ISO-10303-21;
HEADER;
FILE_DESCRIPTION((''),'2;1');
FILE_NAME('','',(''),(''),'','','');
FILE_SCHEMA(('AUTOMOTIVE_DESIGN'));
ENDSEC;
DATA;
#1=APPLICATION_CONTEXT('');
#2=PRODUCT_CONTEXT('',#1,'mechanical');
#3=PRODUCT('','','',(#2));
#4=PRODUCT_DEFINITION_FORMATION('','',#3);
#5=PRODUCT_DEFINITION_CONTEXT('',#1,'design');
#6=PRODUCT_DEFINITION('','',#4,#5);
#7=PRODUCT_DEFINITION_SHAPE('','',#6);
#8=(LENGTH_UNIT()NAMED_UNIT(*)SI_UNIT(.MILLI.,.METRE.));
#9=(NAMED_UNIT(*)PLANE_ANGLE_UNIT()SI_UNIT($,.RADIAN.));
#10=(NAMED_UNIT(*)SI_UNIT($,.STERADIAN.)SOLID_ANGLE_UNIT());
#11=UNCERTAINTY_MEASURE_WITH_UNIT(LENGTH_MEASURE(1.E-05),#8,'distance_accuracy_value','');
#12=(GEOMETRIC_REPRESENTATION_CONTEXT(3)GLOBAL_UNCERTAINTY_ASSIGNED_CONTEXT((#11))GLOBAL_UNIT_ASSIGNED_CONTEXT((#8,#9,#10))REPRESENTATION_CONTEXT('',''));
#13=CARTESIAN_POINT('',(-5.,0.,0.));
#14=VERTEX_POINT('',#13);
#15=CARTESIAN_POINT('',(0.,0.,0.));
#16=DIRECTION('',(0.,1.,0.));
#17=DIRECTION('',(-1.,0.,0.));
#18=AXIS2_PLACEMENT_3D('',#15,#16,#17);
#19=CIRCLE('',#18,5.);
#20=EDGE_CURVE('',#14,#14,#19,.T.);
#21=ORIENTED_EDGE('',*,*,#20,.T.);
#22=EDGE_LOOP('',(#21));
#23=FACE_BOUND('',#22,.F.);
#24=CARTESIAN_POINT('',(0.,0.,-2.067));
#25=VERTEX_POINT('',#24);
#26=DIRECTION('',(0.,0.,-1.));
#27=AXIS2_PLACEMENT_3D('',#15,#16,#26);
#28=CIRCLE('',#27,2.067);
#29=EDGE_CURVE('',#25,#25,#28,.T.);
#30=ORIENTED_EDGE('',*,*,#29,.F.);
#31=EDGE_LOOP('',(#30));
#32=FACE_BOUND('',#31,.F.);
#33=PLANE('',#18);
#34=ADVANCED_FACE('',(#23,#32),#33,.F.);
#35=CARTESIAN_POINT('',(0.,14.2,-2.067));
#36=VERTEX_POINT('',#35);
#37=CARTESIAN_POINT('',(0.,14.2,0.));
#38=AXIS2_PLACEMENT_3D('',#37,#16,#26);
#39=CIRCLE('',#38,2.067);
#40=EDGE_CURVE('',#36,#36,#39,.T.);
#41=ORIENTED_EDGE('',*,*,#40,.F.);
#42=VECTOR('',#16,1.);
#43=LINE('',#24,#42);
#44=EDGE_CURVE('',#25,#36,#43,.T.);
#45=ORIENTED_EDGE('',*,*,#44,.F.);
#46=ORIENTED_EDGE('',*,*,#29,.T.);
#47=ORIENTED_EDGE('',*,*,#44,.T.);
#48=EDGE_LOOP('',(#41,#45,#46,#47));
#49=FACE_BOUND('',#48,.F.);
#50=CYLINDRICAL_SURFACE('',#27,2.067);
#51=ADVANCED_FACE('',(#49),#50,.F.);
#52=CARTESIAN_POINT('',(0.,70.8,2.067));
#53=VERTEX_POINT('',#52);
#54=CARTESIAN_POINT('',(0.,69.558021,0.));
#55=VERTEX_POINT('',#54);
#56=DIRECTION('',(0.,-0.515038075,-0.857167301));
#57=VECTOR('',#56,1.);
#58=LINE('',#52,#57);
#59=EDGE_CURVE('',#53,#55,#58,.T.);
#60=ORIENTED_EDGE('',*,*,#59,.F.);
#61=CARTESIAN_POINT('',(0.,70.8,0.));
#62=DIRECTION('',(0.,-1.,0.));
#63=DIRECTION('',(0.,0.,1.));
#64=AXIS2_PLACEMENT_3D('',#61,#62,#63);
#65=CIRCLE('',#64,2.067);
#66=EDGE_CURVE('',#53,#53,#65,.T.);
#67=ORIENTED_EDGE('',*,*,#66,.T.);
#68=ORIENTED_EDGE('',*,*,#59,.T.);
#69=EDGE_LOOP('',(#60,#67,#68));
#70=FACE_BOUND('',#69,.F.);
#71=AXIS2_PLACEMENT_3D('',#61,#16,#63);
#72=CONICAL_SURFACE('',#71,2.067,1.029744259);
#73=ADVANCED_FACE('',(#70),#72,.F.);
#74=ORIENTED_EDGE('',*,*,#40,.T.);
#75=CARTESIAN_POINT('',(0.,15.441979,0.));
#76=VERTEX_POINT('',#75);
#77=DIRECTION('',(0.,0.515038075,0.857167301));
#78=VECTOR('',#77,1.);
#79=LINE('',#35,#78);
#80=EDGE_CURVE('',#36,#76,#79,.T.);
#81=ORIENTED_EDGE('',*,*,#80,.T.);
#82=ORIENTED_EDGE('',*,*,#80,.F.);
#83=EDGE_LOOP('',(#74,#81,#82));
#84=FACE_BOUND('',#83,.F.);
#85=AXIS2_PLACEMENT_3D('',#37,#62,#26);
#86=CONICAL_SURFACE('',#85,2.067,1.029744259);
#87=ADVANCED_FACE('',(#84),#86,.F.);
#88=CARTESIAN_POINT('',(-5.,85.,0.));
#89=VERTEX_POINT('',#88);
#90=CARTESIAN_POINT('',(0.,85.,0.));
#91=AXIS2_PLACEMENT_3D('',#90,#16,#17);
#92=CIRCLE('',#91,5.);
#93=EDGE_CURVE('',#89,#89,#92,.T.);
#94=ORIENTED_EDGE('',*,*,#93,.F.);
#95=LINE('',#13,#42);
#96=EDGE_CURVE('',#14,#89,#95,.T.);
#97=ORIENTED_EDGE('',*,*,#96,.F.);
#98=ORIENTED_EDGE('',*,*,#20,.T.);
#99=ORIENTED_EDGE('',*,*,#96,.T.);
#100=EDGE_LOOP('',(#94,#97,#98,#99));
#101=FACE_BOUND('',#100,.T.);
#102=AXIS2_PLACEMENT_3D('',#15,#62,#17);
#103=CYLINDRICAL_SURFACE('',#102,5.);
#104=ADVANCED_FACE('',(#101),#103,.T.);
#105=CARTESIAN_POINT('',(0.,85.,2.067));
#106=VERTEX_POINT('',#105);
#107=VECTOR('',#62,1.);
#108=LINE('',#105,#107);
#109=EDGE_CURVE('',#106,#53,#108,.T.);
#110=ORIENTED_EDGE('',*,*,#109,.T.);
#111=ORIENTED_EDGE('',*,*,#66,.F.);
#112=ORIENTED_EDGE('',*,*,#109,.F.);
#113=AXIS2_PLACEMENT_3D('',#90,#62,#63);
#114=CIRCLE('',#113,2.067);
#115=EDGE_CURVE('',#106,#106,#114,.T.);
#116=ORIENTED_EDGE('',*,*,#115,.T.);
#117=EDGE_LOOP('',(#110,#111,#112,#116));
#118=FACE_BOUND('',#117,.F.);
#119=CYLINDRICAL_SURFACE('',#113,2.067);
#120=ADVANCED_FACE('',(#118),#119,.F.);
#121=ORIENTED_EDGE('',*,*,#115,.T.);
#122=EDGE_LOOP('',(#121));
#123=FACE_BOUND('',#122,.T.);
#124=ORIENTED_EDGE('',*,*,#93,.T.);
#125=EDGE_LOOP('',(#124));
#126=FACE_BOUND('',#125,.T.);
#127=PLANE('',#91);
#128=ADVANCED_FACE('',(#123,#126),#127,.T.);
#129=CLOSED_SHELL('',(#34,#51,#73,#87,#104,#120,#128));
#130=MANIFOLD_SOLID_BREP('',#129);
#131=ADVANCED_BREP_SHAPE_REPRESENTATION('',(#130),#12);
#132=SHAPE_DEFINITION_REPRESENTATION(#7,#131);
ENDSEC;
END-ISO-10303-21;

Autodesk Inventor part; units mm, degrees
ref_plane "YZ Plane" through (0, 0, 0) normal (1, 0, 0) x (0, 1, 0)
ref_plane "XZ Plane" through (0, 0, 0) normal (0, 1, 0) x (-1, 0, 0)
ref_plane "XY Plane" through (0, 0, 0) normal (0, 0, 1) x (1, 0, 0)
sketch "Esboço1" plane through (0, 0, 0) normal (0, 1, 0) x (-1, 0, 0)
  circle A0 centre (0, 0) radius 5
  dimension "d1" = 10
extrude "Extrusão1" add sketch "Esboço1" along normal blind 85
sketch "Esboço2" plane through (0, 0, 0) normal (0, -1, 0) x (1, 0, 0)
  circle A0 centre (0, 0) radius 5 projected
hole "Furo1" at (0, 0, 0) direction (0, 1, 0) diameter 4.134 depth 14.2 tip angle 118 thread size "M5x0.8" class "6H" standard "ISO Metric profile"
sketch "Esboço3" plane through (0, 85, 0) normal (0, 1, 0) x (1, 0, 0)
  circle A0 centre (0, 0) radius 5 projected
hole "Furo2" at (0, 85, 0) direction (0, -1, 0) diameter 4.134 depth 14.2 tip angle 118 thread size "M5x0.8" class "6H" standard "ISO Metric profile"
equation "\"Raio_vergadura\" = Espessura"
equation "\"Largura_alívio_de_vergadura\" = Espessura"
equation "\"Profundidade_alívio_de_vergadura\" = 0.5 * Espessura"
equation "\"Tamanho_alívio_de_dobra\" = 4 * Espessura"
equation "\"Remanescente_mínimo\" = 2 * Espessura"
equation "\"Raiodetransição\" = Raio_vergadura"
equation "\"Tamanho_de_raio_de_Jacobi\" = Raio_vergadura"
equation "\"TamanhoFolga\" = Espessura"
equation "\"Espessura\" = 0.5"
properties part number "Sustentação do motor" material "Latão, amarelo macio"
